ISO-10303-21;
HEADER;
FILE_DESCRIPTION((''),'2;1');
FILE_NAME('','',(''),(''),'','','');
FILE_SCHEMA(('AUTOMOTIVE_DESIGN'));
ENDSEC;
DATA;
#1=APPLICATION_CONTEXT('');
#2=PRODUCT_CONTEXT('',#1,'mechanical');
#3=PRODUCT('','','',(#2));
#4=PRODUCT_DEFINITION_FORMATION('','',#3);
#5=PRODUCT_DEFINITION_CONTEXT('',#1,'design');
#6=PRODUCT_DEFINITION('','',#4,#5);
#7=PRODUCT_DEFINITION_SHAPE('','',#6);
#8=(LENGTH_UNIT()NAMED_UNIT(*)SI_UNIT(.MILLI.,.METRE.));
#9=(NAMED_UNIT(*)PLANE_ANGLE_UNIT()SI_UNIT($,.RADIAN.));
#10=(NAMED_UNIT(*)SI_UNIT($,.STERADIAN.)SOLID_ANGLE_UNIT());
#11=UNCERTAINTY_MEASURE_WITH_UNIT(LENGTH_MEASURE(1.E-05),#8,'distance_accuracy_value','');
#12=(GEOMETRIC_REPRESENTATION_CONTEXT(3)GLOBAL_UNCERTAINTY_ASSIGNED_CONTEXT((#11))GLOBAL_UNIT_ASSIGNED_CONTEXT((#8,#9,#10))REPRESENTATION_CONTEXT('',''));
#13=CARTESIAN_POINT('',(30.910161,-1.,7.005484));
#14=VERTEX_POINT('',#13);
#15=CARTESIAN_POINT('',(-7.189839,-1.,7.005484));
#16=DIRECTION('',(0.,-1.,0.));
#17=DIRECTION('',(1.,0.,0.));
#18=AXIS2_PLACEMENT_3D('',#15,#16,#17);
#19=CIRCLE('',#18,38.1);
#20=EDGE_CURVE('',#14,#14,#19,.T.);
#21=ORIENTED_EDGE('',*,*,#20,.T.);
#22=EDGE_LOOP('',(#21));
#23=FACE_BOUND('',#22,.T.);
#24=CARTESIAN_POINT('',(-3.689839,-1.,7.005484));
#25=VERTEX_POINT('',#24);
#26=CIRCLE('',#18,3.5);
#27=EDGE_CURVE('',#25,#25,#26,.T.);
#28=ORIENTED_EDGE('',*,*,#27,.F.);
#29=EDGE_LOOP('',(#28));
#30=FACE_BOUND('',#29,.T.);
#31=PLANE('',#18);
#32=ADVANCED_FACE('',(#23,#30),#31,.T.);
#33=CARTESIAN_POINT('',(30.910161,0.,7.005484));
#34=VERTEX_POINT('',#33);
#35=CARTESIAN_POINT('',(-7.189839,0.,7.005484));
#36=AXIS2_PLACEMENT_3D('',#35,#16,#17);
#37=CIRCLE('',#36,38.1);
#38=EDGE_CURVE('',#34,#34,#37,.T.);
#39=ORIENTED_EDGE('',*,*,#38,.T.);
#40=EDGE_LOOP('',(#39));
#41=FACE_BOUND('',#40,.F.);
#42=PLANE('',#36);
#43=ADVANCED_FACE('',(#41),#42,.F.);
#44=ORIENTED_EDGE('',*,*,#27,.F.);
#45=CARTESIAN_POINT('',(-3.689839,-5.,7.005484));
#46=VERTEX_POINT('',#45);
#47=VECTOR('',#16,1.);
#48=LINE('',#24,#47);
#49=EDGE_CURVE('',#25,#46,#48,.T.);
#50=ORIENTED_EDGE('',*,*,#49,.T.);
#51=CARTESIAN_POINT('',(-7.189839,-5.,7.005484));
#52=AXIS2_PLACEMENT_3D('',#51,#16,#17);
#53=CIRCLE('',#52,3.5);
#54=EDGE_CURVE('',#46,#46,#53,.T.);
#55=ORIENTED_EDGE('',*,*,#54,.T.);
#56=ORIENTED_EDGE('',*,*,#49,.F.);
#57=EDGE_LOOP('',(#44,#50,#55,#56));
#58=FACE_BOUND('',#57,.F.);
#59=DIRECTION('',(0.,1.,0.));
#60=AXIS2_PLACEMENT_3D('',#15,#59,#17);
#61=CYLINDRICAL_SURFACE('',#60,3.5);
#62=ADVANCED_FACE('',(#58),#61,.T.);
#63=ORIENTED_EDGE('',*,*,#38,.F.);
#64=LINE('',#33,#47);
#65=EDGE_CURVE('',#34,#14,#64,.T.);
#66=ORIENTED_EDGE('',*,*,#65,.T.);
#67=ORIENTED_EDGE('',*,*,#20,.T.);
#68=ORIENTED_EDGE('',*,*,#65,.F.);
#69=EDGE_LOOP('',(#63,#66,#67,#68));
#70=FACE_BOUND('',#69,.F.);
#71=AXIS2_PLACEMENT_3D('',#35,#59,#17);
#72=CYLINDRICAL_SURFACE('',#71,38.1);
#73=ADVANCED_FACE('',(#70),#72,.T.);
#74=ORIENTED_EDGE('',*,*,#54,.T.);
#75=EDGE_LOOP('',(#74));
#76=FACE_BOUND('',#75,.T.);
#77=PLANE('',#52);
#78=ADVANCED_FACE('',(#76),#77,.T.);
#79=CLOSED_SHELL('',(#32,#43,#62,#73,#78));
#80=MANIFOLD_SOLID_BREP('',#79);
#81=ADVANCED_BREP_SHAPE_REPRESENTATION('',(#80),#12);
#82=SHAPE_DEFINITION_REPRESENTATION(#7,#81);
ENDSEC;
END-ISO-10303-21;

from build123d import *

# Parameters (mm, degrees)
F0_R     = 38.1
F1_DEPTH = 1
F2_R     = 3.5
F3_DEPTH = 4


# Not quite as in the source:
# - a feature of the source that left no trace in its solid (it failed there, or was rolled back) is left out
# - the program builds the solid bodies; features that only make, move or delete a surface that nothing else refers to are left out


with BuildPart() as f1:
    # F0 (on Front) → F1 (new body)
    with BuildSketch(Plane.XZ):
        with Locations((-7.189839147, 7.005484309)):
            Circle(F0_R)
    extrude(amount=F1_DEPTH)

    # F2 (on face) → F3 (join)
    with BuildSketch(Plane.XZ.offset(1)):
        with Locations((-7.189839147, 7.005484309)):
            Circle(F2_R)
    extrude(amount=F3_DEPTH)


solid = f1.part
